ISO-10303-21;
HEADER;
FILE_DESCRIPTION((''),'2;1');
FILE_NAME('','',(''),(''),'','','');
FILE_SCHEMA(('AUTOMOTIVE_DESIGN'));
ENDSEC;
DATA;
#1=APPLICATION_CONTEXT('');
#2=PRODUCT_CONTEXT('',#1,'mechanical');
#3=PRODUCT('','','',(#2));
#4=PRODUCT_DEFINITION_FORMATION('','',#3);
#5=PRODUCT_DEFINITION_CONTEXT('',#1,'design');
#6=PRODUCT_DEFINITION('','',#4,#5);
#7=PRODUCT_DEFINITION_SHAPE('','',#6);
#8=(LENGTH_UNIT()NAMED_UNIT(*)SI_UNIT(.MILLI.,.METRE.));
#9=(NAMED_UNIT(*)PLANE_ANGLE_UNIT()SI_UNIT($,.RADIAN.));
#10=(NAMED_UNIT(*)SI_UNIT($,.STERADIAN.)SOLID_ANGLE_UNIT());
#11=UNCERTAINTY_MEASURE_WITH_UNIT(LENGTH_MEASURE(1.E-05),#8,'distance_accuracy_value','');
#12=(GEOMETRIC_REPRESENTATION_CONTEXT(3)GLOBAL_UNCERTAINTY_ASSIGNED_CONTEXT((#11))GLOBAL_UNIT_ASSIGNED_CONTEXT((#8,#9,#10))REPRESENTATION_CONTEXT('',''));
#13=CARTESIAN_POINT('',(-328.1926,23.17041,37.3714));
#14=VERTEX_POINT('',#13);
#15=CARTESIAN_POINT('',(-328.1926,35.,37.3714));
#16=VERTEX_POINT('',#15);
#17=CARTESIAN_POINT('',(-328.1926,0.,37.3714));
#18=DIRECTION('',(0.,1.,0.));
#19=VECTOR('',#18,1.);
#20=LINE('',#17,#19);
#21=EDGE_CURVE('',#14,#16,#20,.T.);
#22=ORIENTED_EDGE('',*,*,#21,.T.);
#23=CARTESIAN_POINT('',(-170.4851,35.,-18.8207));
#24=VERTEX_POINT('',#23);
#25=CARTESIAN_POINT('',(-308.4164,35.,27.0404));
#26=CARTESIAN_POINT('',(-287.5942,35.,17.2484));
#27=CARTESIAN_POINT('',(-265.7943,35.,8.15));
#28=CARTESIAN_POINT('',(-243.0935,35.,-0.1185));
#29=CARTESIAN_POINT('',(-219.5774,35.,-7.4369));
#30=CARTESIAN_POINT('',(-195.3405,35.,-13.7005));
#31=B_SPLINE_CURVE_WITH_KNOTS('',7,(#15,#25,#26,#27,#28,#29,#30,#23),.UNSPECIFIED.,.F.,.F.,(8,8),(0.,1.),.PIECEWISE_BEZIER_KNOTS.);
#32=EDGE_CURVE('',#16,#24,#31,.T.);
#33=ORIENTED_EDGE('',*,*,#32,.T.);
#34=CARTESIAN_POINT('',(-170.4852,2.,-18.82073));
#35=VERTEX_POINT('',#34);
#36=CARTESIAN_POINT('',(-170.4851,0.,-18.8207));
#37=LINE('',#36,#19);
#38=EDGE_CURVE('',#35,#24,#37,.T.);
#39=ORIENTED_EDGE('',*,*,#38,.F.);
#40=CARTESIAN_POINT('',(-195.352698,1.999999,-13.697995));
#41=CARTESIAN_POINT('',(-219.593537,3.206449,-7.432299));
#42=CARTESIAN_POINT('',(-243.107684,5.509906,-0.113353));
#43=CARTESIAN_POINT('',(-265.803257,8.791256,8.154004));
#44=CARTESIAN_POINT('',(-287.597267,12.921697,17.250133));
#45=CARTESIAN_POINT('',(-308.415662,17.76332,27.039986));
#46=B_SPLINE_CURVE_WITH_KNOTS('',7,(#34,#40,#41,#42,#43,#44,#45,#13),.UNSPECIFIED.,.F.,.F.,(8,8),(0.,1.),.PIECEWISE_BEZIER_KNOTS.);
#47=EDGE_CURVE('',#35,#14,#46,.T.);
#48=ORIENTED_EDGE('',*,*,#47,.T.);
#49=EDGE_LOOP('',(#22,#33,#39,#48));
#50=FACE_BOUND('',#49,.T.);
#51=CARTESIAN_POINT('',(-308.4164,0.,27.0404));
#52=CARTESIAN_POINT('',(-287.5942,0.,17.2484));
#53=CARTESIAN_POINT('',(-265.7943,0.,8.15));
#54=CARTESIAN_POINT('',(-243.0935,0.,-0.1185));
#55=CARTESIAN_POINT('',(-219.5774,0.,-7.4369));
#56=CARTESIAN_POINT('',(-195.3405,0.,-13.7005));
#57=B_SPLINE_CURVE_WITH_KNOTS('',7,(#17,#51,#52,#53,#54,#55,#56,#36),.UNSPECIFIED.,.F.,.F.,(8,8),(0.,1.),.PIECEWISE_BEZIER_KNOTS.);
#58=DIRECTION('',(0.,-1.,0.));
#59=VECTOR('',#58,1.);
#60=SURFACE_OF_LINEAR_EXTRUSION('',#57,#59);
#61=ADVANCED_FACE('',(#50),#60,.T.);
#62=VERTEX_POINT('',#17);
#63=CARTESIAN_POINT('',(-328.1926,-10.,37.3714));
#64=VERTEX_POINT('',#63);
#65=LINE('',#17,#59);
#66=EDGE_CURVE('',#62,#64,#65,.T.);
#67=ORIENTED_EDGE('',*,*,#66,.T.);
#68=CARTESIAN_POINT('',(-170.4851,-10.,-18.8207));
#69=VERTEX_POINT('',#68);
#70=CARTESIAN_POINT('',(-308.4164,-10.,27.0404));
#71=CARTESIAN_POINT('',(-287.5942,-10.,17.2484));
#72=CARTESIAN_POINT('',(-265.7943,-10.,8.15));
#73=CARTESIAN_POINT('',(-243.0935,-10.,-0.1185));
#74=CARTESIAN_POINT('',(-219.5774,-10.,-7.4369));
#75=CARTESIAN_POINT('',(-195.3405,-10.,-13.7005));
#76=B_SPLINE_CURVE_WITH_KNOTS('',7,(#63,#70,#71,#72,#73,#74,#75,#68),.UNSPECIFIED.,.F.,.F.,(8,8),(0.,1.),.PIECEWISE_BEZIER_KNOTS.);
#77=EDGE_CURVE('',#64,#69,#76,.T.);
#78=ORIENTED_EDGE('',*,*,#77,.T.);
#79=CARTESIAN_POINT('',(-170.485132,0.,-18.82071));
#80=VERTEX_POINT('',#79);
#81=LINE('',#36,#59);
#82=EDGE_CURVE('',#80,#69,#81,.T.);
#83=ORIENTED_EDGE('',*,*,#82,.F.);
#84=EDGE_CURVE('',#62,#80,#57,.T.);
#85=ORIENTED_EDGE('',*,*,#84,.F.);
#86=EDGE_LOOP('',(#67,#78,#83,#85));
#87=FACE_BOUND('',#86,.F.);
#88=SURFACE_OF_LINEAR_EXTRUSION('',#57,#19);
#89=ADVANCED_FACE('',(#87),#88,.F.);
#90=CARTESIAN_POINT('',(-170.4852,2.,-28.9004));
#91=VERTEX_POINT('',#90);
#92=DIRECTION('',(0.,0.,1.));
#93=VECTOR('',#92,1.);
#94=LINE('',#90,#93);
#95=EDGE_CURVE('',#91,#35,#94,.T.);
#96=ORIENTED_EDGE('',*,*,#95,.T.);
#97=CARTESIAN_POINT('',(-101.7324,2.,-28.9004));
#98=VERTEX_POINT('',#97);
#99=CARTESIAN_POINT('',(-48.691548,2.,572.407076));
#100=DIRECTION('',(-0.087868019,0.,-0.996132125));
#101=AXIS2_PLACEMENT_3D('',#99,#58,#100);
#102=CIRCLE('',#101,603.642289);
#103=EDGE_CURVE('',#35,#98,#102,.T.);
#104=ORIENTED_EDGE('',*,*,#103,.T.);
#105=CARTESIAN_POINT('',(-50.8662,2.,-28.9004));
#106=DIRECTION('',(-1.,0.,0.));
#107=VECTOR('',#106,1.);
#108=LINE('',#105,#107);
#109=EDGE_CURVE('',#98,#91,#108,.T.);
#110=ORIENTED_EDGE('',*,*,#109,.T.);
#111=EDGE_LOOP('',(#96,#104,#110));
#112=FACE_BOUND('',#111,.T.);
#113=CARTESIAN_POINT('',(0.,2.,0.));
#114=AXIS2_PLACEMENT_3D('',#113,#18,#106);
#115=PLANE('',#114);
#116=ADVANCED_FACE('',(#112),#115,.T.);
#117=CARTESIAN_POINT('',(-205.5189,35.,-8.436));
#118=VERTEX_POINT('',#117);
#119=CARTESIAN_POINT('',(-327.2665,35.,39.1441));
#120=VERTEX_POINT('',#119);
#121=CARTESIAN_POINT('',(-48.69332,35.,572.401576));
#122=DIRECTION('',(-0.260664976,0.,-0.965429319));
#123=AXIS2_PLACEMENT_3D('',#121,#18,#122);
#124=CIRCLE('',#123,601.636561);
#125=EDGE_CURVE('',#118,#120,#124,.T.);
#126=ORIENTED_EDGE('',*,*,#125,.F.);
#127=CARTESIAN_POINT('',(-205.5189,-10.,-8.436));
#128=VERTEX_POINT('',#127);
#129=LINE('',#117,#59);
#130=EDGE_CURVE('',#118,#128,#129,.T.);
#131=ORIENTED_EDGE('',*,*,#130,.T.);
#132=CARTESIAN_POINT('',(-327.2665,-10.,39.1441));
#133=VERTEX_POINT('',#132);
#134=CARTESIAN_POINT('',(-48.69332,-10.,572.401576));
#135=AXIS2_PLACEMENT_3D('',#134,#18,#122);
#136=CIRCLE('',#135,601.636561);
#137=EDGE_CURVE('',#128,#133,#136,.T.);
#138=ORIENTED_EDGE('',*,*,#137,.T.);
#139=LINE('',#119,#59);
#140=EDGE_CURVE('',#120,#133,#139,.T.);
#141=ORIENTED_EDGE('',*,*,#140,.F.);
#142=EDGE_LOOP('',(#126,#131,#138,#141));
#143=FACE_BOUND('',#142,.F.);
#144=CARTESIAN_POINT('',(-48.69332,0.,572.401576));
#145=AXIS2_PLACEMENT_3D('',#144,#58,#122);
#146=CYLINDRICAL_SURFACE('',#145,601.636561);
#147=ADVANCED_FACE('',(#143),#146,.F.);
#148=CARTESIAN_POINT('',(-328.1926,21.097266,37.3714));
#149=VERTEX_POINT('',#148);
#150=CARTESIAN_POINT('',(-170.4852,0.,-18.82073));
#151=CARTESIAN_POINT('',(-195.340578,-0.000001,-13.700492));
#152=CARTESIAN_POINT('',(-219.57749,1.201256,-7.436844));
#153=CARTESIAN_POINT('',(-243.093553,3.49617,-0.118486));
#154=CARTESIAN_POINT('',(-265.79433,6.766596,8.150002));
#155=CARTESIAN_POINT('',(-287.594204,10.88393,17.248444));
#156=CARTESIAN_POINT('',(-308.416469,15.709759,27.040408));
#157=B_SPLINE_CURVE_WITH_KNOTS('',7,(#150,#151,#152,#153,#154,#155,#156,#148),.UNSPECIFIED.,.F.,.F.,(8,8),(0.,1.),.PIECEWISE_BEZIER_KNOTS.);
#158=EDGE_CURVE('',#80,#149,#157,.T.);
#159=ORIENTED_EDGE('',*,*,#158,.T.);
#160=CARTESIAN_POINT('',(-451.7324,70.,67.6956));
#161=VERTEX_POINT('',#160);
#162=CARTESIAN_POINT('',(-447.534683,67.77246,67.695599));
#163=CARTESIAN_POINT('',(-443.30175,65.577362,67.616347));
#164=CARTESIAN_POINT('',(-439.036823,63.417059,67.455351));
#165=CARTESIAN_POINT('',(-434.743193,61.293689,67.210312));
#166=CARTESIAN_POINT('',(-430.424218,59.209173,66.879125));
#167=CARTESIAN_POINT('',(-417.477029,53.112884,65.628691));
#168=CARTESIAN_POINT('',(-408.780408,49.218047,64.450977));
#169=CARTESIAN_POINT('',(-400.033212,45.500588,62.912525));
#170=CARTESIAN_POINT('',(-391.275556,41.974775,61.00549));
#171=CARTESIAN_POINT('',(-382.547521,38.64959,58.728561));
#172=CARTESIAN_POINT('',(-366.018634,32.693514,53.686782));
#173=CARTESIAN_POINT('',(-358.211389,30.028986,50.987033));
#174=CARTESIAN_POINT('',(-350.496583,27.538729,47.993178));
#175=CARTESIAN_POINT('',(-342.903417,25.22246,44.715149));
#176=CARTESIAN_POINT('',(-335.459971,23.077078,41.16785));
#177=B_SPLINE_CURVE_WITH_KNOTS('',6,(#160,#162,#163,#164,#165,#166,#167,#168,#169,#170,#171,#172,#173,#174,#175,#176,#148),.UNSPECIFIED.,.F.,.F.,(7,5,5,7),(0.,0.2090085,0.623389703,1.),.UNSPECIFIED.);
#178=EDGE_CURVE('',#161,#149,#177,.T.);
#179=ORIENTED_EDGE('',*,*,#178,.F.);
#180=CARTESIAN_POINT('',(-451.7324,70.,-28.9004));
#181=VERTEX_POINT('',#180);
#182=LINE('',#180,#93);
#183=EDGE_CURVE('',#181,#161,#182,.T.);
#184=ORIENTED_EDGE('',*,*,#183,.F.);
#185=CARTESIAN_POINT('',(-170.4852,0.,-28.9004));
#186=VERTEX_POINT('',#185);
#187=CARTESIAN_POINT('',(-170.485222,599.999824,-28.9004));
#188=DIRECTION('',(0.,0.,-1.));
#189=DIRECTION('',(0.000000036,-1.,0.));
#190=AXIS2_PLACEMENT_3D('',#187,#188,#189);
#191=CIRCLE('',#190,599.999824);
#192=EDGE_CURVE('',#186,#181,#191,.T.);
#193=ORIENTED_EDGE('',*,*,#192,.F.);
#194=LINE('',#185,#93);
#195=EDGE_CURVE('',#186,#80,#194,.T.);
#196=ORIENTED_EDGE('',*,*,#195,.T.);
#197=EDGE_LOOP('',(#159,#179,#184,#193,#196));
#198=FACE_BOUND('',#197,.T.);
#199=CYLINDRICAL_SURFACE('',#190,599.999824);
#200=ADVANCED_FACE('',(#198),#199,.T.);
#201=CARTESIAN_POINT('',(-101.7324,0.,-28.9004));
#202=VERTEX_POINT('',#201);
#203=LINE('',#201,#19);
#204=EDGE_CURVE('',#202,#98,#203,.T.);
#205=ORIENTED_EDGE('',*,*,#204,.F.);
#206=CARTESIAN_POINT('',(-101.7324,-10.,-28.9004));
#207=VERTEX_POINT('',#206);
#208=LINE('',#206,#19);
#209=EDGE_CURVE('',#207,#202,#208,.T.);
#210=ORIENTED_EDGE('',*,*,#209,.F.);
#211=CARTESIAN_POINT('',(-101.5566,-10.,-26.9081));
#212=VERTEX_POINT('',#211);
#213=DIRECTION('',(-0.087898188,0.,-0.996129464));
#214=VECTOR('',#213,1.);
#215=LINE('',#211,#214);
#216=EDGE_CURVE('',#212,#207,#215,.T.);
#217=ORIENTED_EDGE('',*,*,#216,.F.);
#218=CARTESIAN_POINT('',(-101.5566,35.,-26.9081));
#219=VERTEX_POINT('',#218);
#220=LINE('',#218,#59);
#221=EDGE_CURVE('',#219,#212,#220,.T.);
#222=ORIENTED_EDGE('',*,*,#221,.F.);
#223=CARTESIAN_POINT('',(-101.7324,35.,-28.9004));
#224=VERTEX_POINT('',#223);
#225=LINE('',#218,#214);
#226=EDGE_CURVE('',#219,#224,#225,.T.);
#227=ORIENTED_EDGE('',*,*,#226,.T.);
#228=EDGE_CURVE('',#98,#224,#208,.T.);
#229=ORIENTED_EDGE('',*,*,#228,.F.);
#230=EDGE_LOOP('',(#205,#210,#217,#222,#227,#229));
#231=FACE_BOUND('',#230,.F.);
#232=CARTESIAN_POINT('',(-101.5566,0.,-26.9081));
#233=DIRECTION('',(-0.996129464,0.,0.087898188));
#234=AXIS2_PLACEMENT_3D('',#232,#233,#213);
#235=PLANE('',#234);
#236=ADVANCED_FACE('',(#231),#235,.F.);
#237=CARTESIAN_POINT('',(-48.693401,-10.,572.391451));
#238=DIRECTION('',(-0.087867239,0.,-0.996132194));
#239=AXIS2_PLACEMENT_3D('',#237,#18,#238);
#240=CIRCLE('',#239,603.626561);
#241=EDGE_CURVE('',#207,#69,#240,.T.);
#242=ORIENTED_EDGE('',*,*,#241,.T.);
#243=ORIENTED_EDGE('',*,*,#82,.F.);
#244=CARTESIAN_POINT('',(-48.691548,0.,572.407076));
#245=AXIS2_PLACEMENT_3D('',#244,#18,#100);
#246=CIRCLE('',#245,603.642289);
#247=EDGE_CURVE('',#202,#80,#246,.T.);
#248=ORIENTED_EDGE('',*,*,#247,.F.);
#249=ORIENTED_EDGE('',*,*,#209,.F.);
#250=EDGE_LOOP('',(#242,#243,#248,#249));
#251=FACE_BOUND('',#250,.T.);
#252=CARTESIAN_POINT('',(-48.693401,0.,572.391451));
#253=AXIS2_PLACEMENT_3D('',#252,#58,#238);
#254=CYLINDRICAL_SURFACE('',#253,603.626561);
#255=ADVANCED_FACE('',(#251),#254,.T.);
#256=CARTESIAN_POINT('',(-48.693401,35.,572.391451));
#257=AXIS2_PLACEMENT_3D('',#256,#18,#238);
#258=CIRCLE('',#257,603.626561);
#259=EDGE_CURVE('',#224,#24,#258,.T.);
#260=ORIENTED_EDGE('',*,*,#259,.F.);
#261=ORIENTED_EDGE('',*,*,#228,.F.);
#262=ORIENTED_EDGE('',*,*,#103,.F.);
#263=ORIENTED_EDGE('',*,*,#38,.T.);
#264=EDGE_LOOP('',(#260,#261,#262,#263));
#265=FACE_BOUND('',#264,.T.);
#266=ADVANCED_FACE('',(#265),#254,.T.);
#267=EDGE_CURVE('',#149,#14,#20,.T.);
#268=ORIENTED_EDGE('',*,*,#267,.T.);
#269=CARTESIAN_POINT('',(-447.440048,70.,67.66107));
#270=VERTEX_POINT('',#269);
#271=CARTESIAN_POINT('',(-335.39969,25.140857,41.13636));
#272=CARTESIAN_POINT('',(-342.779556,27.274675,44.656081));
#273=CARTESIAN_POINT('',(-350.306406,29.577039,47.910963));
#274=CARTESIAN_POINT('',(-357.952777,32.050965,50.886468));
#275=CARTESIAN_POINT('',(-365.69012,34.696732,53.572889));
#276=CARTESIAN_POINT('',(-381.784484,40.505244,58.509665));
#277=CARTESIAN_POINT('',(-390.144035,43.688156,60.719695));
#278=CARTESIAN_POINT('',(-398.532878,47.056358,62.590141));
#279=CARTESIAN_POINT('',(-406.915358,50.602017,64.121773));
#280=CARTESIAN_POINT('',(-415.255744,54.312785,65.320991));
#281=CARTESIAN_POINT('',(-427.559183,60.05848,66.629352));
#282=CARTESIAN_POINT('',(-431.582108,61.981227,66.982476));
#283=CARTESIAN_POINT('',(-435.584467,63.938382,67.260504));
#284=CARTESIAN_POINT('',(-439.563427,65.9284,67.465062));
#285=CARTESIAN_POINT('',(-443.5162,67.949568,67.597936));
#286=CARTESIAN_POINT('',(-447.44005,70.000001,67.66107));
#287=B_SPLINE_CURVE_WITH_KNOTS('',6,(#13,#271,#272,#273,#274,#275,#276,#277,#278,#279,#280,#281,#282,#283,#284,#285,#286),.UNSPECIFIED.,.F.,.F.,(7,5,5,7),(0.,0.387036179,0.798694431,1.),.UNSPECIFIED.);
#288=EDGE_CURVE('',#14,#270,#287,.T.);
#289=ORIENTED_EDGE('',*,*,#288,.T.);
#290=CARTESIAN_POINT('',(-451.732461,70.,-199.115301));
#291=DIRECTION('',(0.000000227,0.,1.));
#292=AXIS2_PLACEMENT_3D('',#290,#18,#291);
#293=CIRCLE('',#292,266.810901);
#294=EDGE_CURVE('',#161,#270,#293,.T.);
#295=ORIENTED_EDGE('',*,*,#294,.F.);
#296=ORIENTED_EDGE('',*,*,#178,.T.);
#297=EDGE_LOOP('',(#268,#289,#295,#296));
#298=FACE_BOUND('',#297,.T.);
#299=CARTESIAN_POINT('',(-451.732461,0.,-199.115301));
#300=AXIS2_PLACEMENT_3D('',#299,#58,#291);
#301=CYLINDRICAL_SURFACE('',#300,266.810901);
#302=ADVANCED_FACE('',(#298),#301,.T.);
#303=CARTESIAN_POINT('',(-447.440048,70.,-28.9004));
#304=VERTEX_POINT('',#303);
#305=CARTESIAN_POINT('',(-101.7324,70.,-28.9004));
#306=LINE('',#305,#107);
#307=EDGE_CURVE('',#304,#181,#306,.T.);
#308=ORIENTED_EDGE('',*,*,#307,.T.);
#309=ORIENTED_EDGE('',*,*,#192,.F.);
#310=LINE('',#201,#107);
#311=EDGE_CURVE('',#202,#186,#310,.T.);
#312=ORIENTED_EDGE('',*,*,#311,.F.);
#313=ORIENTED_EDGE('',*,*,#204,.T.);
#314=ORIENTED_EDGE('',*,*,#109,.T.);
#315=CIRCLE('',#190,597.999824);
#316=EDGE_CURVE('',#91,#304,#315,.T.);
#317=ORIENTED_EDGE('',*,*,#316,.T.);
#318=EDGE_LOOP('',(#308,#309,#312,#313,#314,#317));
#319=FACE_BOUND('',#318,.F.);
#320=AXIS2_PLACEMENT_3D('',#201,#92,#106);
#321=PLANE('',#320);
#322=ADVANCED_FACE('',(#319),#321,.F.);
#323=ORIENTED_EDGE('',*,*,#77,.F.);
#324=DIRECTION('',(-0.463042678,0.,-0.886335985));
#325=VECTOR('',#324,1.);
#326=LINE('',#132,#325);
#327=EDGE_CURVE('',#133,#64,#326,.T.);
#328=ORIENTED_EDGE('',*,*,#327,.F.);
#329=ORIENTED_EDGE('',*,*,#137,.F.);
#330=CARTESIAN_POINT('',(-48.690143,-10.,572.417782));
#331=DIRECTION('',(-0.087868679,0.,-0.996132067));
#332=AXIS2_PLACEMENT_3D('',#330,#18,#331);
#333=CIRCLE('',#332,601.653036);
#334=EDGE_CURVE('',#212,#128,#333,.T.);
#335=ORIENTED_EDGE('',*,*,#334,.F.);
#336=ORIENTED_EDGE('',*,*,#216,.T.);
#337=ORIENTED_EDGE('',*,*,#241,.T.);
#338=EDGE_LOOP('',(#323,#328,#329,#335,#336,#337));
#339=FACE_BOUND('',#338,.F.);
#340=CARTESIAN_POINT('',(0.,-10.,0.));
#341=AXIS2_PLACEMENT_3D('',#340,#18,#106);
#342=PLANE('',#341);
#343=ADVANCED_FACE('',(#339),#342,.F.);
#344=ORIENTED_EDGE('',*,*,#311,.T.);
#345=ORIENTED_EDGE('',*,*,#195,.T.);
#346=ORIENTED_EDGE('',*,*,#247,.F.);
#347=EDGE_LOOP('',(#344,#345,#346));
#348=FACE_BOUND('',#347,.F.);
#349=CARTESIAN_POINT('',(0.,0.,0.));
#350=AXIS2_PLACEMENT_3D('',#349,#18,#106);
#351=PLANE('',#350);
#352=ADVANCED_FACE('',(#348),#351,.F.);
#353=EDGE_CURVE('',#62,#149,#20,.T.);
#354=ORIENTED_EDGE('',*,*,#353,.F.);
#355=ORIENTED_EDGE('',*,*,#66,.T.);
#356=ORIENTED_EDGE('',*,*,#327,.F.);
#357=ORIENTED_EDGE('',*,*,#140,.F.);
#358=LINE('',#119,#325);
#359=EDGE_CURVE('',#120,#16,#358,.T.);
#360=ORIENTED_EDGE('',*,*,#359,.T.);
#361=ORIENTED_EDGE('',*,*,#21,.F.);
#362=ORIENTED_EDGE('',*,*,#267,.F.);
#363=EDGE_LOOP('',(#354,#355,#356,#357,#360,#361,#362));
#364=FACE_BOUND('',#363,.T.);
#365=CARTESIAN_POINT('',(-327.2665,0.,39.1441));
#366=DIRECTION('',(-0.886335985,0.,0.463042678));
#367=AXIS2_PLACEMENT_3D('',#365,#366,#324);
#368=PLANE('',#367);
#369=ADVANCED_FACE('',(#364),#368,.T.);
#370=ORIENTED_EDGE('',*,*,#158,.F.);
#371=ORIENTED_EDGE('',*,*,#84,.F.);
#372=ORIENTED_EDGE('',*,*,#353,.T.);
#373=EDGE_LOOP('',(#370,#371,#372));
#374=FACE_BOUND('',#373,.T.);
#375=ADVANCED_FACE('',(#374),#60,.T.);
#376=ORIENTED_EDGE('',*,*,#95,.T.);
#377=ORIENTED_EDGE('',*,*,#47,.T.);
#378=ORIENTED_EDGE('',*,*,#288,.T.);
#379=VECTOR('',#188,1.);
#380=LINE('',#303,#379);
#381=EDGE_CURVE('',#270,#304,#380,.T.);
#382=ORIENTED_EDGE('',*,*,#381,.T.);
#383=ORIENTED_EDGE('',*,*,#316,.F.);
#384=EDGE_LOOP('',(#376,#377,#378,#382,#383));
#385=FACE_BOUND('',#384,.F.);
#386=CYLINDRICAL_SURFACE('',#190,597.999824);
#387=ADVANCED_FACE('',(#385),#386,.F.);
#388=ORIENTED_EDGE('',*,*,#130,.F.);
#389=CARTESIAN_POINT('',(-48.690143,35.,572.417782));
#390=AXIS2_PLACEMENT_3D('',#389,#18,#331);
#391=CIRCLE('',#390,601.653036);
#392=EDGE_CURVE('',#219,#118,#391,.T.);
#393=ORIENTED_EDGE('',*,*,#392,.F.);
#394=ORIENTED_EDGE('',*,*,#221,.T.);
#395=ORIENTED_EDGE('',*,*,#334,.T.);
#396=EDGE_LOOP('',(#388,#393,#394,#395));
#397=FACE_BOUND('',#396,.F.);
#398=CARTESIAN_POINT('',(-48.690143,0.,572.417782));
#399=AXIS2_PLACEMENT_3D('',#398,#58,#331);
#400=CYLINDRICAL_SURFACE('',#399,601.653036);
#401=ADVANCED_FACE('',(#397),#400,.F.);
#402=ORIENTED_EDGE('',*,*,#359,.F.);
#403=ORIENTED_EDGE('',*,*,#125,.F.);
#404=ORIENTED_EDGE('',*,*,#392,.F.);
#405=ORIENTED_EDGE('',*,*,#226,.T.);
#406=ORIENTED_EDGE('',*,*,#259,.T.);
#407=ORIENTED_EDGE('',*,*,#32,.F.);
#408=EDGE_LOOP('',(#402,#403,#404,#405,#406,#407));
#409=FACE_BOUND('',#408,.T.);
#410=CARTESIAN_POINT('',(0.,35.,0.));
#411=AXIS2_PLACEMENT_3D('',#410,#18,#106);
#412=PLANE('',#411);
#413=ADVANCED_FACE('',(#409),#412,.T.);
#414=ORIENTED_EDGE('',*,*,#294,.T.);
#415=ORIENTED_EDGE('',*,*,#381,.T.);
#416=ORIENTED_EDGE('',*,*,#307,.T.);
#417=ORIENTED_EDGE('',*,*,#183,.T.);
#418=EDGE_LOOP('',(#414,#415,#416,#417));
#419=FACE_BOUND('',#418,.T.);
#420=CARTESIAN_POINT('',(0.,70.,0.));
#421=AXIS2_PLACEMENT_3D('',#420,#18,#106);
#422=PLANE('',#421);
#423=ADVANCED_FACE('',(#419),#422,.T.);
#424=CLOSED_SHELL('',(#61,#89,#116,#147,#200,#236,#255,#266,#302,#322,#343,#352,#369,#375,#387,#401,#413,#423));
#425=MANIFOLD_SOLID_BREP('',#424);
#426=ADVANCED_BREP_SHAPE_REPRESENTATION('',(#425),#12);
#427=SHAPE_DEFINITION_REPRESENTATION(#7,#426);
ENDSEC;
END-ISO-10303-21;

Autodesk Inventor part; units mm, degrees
ref_plane "YZ Plane" through (0, 0, 0) normal (1, 0, 0) x (0, 1, 0)
ref_plane "XZ Plane" through (0, 0, 0) normal (0, 1, 0) x (-1, 0, 0)
ref_plane "XY Plane" through (0, 0, 0) normal (0, 0, 1) x (1, 0, 0)
sketch "スケッチ1" plane through (0, 0, 0) normal (0, 1, 0) x (-1, 0, 0)
  line L0 (101.7324, -28.9004) -> (451.7324, -28.9004)
  line L1 (451.7324, -28.9004) -> (451.7324, 67.6956)
  arc A0 (451.7324, 67.6956) -> (328.1926, 37.3714) centre (451.7324, -199.1148) ccw
  arc A1 (101.7324, -28.9004) -> (328.1926, 37.3714) centre (48.6916, 572.4068) ccw
  dimension "d1" = 350
  dimension "d2" = 603.642
extrude "押し出し1" add sketch "スケッチ1" along normal blind 70
sketch "スケッチ2" plane through (-101.7324, 0, -28.9004) normal (0, 0, -1) x (-1, 0, 0)
  arc A0 (68.7528, 0) -> (350, 70) centre (68.7528, 600) ccw
  line L0 (350, 0) -> (0, 0) projected
  line L1 (350, 0) -> (350, 70) projected
  line L2 (0, 0) -> (0, 70) projected
  point P0 (-101.7324, 0)
  dimension "d9" = 600
extrude "押し出し2" cut sketch "スケッチ2" against normal through all
shell "シェル1" thickness 2 removed faces 4 at (-334.0598, 39.1147, 40.3449) at (-150.6861, 46.6667, -22.5561) at (-359.2071, 70, 10.3289) at (-325.356, 65.1801, -28.9004)
sketch "スケッチ5" plane through (0, 0, 0) normal (0, 1, 0) x (-1, 0, 0)
  arc A0 (101.7324, -28.9004) -> (170.4851, -18.8207) centre (48.6916, 572.4068) ccw projected
  spline S0 degree 7 poles (328.1926, 37.3714) (308.4164, 27.0404) (287.5942, 17.2484) (265.7943, 8.15) (243.0935, -0.1185) (219.5774, -7.4369) (195.3405, -13.7005) (170.4851, -18.8207) knots 0 0 0 0 0 0 0 0 1 1 1 1 1 1 1 1 projected
  arc A1 (101.7324, -28.9004) -> (170.4851, -18.8207) centre (48.6916, 572.4068) ccw
  arc A2 (170.4851, -18.8207) -> (328.1926, 37.3714) centre (48.6916, 572.4068) ccw
  arc A3 (101.5566, -26.9081) -> (205.5189, -8.436) centre (48.6916, 572.4068) ccw
  arc A4 (205.5189, -8.436) -> (327.2665, 39.1441) centre (48.6916, 572.4068) ccw
  arc A5 (101.7324, -28.9004) -> (170.4851, -18.8207) centre (48.6916, 572.4068) ccw projected
  line L0 (101.5566, -26.9081) -> (101.7324, -28.9004)
  line L1 (327.2665, 39.1441) -> (328.1926, 37.3714)
  point P0 (0, 0)
  dimension "d11" = 2
extrude "押し出し3" add sketch "スケッチ5" along normal blind 35 and the other way blind 10
properties part number "splitter"
